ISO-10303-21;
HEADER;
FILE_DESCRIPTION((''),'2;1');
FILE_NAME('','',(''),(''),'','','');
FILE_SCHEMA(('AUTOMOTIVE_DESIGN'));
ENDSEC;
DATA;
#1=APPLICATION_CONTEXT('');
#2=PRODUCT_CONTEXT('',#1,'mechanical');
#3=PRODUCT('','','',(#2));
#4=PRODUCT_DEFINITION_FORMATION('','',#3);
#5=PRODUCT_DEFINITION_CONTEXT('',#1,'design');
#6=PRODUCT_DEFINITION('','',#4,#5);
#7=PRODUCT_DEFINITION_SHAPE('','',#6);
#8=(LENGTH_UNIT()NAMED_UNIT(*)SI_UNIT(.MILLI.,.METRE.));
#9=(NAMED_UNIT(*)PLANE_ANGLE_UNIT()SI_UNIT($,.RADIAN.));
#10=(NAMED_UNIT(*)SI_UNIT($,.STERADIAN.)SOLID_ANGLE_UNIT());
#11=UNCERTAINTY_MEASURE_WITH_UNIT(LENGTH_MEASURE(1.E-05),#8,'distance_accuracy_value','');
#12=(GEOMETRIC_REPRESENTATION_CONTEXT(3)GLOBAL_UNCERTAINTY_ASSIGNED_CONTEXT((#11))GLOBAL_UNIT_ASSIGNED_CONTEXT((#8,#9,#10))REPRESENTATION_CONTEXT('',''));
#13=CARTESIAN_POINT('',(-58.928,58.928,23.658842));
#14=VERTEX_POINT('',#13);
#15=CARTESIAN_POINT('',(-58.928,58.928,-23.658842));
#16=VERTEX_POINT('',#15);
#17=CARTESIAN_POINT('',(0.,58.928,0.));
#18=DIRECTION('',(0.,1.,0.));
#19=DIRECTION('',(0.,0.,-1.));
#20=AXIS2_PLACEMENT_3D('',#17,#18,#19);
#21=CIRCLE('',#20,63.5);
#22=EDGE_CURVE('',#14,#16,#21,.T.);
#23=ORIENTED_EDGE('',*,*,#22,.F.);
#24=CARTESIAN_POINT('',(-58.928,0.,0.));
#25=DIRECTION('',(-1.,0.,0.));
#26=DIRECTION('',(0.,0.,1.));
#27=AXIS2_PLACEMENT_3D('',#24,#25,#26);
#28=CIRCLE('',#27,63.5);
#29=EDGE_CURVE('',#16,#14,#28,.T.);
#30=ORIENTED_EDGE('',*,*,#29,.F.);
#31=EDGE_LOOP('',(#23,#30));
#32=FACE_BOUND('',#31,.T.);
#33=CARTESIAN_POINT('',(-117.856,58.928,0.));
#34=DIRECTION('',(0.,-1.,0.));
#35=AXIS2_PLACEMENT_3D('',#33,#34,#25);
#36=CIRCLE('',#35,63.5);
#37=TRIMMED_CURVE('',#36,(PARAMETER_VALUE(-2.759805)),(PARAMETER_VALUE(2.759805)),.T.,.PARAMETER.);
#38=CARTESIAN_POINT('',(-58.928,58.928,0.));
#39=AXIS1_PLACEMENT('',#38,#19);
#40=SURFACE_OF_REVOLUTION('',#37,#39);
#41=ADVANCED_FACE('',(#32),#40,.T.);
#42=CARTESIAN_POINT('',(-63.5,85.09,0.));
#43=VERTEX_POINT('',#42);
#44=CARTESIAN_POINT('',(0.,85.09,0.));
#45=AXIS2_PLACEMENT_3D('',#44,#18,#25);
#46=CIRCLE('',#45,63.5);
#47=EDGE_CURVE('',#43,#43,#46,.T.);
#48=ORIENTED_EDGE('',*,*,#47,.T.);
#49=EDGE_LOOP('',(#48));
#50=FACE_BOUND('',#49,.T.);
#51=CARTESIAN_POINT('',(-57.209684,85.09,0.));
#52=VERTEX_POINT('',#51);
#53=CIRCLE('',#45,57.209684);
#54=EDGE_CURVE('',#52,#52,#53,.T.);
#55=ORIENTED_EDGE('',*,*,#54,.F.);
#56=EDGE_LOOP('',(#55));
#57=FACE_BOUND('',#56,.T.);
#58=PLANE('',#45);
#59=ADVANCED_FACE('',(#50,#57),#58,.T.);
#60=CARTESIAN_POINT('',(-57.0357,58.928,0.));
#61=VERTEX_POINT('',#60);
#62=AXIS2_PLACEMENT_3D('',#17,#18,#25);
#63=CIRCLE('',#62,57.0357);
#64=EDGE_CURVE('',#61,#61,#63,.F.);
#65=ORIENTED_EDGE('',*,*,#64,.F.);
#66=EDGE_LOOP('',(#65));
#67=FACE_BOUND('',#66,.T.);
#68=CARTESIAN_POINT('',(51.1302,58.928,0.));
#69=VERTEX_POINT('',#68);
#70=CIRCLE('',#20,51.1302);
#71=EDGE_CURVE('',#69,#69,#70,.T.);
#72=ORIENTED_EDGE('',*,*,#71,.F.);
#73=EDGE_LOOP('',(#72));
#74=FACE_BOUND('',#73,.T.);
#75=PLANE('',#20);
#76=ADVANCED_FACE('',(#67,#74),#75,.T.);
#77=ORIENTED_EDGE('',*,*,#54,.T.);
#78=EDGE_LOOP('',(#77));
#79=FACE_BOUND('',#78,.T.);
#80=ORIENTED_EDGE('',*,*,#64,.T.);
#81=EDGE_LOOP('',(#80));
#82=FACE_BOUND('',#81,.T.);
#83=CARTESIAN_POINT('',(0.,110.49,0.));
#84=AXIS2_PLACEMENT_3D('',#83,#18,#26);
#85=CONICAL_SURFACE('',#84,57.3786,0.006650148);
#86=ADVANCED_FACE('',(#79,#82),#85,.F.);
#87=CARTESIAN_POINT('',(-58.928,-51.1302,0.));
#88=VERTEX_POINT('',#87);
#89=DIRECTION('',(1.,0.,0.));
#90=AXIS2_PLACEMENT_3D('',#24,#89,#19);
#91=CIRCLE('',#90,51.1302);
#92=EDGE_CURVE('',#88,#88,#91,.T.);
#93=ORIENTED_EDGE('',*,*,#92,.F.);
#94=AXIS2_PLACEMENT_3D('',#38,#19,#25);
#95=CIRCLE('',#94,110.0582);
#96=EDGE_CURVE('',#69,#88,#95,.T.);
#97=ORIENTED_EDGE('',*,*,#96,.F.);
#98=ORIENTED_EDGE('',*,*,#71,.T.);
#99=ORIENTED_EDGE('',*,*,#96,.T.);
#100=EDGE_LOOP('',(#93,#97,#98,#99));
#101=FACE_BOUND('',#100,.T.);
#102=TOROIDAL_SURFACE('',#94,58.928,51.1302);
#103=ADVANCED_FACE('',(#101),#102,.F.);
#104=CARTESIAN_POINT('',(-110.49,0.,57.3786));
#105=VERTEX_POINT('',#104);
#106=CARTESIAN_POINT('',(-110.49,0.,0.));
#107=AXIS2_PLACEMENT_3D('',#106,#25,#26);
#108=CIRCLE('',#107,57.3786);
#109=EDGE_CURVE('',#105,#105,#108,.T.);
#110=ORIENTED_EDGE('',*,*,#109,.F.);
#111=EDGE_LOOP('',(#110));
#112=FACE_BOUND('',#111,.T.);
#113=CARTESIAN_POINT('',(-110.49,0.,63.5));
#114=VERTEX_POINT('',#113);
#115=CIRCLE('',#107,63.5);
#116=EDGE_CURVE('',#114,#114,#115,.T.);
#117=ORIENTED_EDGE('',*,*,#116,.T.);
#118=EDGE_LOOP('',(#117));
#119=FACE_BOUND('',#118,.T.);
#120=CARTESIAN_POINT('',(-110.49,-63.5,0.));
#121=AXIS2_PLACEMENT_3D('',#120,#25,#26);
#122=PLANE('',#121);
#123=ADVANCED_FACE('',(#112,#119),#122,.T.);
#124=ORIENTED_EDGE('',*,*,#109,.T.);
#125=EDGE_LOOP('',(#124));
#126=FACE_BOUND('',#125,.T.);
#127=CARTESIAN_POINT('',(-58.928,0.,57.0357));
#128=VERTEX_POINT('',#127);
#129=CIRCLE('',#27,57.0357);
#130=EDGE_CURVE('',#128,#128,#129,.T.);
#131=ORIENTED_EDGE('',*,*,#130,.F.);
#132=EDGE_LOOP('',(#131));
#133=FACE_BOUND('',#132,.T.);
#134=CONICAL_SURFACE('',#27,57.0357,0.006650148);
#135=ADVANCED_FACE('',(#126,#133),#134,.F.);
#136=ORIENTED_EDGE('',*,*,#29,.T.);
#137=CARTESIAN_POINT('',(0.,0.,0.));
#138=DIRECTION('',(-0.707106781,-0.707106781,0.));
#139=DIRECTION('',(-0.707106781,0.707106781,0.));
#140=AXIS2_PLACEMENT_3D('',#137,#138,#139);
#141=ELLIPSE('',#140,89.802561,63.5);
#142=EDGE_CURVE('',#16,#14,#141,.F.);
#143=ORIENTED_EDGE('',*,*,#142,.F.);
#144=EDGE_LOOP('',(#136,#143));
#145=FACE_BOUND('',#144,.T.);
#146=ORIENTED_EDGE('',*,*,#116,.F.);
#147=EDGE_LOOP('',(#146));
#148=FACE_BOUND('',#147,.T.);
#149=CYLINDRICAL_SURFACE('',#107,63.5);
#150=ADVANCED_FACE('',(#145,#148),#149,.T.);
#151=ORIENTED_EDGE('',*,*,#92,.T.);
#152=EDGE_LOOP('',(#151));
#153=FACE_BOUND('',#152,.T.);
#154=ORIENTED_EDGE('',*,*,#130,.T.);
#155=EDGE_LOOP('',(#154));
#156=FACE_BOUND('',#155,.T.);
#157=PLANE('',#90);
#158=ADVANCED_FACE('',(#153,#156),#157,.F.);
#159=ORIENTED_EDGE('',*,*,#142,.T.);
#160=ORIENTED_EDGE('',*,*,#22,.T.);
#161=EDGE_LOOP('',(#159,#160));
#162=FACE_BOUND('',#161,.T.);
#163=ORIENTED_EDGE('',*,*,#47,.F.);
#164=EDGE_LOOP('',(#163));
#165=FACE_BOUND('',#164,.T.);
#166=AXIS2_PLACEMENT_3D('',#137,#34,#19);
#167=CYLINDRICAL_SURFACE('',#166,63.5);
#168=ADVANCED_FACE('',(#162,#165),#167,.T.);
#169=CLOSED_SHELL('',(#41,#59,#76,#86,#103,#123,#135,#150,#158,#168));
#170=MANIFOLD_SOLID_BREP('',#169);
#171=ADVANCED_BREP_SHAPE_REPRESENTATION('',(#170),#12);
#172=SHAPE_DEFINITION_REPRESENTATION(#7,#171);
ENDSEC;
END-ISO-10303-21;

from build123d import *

# Parameters (mm, degrees)
SKETCH3_R          = 63.5
SKETCH3_R_2        = 51.1302
SKETCH5_R          = 63.5
SKETCH5_R_2        = 42.73738
CUT_EXTRUDE1_DEPTH = 25.4


with BuildPart() as part:
    # Sketch1 → Revolve1 (revolve)
    with BuildSketch(Plane.XY):
        Polygon((-110.49, -63.5), (-58.928, -63.5), (-58.928, -57.0357), (-110.49, -57.3786), align=None)
    revolve(axis=Axis((-110.49, 0, 0), (1, 0, 0)))


with BuildPart() as body_2:
    # Sketch2 → Revolve2 (revolve)
    with BuildSketch(Plane.XY):
        Polygon((57.3786, 110.49), (57.0357, 58.928), (63.5, 58.928), (63.5, 110.49), align=None)
    revolve(axis=Axis((0, 0, 0), (0, 1, 0)))


with BuildPart() as sweep1_tool:
    # Sweep1: sweep along a path in Sketch4
    with BuildLine(Plane.XY) as sweep1_path:
        ThreePointArc((-58.928, 0), (-17.259612, 17.259612), (0, 58.928))
    # Sketch3 → Sweep1 (sweep)
    with BuildSketch(Plane(origin=(-58.928, 0, 0), x_dir=(0, 0, -1), z_dir=(1, 0, 0))):
        Circle(SKETCH3_R)
        Circle(SKETCH3_R_2, mode=Mode.SUBTRACT)
    sweep(path=sweep1_path.line)


with BuildPart() as part_1:
    add(part.part)


with BuildPart() as part_2:
    # Sweep1: joined with sweep1_tool
    add(part_1.part.fuse(sweep1_tool.part, body_2.part, tol=0.00001))

    # Sketch5 → Cut-Extrude1 (cut)
    with BuildSketch(Plane(origin=(0, 110.49, 0), x_dir=(1, 0, 0), z_dir=(0, 1, 0))):
        Circle(SKETCH5_R)
        Circle(SKETCH5_R_2, mode=Mode.SUBTRACT)
    extrude(amount=-CUT_EXTRUDE1_DEPTH, mode=Mode.SUBTRACT)


solid = part_2.part
